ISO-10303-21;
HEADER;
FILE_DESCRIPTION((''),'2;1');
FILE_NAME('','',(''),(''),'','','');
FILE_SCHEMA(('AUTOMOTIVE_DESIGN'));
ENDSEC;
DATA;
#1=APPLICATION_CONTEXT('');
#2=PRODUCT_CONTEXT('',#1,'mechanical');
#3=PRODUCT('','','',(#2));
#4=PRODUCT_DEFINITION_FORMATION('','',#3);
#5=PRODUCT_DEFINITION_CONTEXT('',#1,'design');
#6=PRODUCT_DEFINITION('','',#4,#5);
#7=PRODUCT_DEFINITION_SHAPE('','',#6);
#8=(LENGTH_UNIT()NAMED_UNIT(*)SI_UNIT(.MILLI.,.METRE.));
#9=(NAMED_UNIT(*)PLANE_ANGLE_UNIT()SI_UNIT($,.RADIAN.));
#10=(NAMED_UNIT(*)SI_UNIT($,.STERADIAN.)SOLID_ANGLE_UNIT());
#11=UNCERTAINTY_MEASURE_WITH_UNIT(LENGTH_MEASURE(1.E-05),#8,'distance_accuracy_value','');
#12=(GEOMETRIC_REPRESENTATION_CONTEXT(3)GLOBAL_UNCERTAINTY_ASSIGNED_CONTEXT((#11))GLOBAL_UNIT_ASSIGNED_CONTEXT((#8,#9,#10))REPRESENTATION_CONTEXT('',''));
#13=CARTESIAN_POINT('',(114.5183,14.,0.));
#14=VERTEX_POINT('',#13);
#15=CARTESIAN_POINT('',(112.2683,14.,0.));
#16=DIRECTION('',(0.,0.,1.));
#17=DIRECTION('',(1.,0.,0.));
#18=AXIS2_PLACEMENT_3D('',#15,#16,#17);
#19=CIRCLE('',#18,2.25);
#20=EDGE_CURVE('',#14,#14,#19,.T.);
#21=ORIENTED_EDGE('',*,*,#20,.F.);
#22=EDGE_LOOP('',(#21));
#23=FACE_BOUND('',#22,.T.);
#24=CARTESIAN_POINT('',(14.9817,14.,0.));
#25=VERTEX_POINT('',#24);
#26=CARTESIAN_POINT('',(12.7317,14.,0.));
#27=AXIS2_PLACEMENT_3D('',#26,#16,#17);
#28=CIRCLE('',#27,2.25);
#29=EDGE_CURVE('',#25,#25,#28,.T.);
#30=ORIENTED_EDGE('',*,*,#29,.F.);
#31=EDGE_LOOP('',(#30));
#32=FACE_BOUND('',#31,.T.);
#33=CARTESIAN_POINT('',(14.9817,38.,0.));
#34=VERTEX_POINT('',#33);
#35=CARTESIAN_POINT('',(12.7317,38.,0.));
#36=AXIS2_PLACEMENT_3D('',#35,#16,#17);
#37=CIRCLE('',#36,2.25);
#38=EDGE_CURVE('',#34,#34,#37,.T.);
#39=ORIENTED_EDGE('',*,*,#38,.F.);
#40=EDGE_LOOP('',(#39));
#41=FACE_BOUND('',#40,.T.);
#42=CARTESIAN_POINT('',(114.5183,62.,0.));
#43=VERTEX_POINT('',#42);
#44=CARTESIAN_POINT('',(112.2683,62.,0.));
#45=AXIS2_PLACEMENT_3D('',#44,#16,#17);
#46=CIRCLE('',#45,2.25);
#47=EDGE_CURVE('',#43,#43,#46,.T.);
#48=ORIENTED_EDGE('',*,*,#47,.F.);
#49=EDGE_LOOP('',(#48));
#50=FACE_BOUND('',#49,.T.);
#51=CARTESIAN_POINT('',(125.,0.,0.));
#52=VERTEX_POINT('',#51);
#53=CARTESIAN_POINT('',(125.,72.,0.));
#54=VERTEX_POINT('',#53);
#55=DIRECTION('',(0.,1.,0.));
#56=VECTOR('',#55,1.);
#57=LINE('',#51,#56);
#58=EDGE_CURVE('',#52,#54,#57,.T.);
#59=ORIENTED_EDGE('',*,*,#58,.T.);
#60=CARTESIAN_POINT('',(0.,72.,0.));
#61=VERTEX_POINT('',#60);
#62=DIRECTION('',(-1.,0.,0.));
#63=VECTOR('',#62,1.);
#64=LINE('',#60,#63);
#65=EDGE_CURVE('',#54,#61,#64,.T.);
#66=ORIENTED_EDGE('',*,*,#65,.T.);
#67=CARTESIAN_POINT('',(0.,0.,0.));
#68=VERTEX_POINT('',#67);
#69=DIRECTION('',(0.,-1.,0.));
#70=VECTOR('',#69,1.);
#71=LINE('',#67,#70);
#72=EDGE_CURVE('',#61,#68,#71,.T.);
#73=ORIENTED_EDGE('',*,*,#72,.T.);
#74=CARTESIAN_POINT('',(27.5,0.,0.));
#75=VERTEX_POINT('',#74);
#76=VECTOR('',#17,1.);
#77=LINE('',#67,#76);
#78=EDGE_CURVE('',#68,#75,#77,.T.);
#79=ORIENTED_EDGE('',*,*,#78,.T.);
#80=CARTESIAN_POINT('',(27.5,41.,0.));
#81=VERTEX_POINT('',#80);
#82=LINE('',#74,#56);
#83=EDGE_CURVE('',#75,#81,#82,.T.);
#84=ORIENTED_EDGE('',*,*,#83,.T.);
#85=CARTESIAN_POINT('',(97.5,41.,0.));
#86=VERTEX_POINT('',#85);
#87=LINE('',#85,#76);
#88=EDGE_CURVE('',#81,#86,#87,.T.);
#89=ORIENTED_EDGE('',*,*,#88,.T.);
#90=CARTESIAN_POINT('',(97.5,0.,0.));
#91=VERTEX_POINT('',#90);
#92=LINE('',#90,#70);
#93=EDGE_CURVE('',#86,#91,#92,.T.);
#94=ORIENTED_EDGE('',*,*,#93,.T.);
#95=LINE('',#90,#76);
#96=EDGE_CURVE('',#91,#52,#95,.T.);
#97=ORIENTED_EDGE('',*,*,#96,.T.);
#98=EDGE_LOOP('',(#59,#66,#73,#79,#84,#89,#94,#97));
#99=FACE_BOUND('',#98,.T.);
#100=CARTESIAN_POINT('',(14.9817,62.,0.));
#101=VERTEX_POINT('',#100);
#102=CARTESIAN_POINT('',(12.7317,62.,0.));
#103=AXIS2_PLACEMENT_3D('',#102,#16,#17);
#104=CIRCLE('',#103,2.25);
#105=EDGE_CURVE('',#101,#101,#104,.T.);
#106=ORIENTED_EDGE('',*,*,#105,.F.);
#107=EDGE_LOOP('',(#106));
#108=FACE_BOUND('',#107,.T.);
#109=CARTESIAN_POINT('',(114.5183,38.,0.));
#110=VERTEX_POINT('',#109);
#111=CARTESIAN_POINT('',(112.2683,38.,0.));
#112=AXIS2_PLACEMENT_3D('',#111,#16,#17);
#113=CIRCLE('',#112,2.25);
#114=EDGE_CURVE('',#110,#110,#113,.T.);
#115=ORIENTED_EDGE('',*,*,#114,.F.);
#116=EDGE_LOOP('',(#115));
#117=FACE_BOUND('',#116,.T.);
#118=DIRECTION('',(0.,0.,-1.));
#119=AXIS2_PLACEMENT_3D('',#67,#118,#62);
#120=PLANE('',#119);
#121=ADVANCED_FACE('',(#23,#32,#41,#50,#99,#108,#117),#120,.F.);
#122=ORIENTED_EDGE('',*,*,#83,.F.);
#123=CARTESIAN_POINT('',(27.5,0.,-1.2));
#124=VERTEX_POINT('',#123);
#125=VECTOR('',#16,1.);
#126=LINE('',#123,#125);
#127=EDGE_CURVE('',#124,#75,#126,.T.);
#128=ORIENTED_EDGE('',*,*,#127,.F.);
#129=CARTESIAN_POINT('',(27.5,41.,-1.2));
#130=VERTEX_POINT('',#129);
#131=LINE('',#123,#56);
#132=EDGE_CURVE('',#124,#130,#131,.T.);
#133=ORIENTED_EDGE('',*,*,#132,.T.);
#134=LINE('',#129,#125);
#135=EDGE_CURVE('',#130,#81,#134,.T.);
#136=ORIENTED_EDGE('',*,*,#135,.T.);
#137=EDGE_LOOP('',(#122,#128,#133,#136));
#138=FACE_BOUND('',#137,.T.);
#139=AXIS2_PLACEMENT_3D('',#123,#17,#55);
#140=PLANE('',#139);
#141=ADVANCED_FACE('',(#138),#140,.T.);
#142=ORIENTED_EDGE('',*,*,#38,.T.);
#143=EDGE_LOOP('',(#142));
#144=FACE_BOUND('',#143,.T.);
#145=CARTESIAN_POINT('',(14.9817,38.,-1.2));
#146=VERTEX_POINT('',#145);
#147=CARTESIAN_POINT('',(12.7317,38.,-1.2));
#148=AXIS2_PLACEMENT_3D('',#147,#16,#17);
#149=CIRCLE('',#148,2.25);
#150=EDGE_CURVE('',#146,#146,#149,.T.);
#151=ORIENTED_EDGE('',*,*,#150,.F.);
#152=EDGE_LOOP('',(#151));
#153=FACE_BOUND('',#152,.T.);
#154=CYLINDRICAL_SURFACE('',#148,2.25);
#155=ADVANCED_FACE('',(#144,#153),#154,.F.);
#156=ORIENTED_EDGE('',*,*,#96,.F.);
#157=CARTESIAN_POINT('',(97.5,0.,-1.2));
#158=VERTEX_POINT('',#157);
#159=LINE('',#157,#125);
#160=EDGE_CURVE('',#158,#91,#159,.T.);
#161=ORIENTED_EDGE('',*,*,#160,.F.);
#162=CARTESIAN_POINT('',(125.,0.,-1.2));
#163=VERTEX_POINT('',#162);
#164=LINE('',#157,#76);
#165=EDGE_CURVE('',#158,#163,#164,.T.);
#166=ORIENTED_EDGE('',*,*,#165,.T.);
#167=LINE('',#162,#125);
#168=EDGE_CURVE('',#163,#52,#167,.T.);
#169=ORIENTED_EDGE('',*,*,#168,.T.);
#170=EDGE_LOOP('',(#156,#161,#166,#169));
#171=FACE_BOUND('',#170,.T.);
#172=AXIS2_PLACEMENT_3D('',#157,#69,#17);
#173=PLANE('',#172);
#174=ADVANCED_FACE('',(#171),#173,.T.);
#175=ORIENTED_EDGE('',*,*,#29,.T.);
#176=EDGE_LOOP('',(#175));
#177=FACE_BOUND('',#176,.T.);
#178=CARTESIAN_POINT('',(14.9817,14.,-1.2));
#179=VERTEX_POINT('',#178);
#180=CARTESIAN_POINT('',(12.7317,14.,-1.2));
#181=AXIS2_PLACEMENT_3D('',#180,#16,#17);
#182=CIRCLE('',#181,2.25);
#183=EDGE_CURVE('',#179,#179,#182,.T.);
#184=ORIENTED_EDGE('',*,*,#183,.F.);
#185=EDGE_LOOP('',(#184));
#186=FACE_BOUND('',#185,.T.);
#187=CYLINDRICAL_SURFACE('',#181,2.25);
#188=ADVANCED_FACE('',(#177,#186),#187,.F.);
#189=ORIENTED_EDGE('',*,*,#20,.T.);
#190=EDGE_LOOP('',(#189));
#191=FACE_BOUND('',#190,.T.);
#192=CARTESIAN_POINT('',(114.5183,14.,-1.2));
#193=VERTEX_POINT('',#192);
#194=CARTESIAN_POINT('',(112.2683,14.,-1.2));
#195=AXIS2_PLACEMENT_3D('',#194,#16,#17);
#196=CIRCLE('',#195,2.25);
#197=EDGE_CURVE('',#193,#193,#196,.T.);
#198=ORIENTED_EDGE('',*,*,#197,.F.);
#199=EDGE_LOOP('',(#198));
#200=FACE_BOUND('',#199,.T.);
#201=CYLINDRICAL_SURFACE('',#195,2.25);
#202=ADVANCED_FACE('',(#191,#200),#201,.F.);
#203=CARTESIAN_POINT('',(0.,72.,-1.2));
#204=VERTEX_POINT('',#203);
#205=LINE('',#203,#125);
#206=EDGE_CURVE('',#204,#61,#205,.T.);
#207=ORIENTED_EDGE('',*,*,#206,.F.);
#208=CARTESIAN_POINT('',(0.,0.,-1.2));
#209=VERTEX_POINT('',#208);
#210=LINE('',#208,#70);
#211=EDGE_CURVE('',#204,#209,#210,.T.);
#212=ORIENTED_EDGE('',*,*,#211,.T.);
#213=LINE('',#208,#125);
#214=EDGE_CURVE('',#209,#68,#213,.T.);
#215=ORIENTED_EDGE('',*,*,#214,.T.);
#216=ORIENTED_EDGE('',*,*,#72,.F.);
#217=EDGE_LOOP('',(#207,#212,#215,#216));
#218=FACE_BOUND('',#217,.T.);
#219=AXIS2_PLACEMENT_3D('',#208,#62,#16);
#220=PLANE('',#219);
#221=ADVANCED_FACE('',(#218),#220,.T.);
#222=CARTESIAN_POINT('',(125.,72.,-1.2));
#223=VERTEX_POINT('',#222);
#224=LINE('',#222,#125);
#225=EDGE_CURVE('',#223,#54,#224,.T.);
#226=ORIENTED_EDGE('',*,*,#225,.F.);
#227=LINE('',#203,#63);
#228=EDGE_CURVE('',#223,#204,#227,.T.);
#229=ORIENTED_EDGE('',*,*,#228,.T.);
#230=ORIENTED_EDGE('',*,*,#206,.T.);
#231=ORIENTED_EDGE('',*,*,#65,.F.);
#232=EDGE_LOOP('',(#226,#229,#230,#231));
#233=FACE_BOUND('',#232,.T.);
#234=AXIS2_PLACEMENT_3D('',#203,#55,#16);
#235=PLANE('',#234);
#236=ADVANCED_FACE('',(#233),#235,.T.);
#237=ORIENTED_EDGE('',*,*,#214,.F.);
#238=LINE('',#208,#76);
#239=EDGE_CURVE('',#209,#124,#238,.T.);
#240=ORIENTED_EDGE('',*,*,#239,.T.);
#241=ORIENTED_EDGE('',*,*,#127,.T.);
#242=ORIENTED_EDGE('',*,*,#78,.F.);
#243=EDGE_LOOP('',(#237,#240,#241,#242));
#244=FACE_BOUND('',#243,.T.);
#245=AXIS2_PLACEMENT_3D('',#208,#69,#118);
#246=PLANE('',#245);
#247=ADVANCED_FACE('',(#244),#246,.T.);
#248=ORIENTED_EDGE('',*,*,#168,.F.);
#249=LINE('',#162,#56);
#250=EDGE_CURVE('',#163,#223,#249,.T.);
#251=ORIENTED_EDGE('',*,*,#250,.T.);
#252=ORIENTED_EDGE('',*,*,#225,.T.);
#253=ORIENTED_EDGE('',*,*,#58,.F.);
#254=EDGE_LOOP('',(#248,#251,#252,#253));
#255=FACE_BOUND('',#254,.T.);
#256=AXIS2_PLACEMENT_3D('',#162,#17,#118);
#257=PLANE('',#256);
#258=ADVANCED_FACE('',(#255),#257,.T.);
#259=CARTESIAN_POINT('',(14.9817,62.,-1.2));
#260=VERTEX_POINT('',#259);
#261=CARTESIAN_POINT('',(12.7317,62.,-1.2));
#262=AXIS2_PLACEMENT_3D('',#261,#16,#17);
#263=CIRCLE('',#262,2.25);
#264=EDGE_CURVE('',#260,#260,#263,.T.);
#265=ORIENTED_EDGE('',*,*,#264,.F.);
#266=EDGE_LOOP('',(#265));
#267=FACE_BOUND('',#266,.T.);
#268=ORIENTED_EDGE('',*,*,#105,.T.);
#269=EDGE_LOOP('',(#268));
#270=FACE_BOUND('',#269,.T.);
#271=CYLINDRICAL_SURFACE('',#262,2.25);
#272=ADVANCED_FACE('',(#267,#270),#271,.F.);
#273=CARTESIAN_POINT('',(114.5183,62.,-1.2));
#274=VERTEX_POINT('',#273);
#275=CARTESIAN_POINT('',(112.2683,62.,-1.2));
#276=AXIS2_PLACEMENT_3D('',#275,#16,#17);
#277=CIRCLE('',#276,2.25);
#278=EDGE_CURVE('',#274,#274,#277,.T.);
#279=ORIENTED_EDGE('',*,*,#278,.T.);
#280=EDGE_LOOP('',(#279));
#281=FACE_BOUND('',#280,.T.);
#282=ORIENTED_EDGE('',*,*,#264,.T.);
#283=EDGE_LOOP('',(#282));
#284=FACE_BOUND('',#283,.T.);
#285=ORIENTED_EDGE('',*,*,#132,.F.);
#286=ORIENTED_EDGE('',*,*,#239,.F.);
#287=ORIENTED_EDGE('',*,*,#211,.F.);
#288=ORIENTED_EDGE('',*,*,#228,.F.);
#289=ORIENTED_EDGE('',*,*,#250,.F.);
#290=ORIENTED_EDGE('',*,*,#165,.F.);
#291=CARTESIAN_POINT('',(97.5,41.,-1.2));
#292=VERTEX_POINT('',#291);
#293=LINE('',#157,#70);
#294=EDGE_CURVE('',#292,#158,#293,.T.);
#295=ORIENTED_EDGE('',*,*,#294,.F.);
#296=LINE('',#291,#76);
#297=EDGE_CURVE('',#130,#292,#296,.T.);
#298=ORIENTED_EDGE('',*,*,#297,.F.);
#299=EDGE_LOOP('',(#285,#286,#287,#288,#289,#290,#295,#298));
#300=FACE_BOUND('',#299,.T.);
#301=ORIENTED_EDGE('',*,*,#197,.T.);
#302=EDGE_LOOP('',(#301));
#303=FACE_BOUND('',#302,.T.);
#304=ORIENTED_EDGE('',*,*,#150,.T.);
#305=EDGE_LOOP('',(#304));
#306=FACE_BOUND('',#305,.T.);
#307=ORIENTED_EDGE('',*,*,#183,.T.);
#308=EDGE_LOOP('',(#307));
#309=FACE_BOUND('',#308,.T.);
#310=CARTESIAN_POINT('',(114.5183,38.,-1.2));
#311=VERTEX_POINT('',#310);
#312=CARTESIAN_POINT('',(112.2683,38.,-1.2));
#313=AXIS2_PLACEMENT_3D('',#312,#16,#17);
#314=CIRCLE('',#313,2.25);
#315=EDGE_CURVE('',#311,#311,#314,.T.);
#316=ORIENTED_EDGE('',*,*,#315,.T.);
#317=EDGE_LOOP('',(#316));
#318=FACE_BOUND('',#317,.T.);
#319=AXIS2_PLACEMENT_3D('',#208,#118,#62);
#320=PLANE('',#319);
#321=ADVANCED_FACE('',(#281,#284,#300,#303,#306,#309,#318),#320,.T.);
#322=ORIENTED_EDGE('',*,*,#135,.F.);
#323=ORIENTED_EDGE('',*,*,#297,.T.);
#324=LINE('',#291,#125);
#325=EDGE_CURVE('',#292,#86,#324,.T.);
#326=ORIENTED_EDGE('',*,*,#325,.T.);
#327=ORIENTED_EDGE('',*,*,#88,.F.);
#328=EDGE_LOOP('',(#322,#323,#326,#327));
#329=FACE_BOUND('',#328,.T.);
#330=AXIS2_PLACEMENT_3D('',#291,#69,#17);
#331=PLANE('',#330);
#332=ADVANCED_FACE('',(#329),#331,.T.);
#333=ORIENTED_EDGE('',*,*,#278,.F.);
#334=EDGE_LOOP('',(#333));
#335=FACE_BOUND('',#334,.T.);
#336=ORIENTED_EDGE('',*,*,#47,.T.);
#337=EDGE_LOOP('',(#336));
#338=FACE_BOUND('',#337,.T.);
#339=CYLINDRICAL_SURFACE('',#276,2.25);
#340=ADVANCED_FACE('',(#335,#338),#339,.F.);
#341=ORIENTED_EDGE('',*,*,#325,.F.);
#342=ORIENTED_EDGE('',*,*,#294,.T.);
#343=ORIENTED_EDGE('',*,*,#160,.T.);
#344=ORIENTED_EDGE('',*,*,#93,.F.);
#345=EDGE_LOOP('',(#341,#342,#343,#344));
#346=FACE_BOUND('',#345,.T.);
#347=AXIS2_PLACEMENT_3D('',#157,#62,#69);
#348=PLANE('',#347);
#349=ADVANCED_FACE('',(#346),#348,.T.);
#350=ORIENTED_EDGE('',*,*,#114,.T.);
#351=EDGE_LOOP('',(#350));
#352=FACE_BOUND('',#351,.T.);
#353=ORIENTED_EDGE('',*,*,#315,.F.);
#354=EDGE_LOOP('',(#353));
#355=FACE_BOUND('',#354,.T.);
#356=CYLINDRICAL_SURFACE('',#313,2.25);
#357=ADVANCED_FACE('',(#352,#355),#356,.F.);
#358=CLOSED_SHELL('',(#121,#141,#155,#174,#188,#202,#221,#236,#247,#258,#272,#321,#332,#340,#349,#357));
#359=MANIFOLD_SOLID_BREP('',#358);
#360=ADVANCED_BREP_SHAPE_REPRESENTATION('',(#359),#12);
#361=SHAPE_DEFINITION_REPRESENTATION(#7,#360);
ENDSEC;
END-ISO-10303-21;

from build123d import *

# Parameters (mm, degrees)
SKETCH_1_R             = 2.25
SM_BASE_FLANGE_1_DEPTH = 1.2


# Sheet-metal steps are written as plain solids
with BuildPart() as part:
    # Sketch 1 → Базовая кромка1 (new body)
    with BuildSketch(Plane.XY):
        Polygon((97.5, 0), (125, 0), (125, 72), (0, 72), (0, 0), (27.5, 0), (27.5, 41), (97.5, 41), align=None)
        with Locations((112.2683, 62)):
            Circle(SKETCH_1_R, mode=Mode.SUBTRACT)
        with Locations((112.2683, 38)):
            Circle(SKETCH_1_R, mode=Mode.SUBTRACT)
        with Locations((112.2683, 14)):
            Circle(SKETCH_1_R, mode=Mode.SUBTRACT)
        with Locations((12.7317, 62)):
            Circle(SKETCH_1_R, mode=Mode.SUBTRACT)
        with Locations((12.7317, 38)):
            Circle(SKETCH_1_R, mode=Mode.SUBTRACT)
        with Locations((12.7317, 14)):
            Circle(SKETCH_1_R, mode=Mode.SUBTRACT)
    extrude(amount=-SM_BASE_FLANGE_1_DEPTH)


solid = part.part
